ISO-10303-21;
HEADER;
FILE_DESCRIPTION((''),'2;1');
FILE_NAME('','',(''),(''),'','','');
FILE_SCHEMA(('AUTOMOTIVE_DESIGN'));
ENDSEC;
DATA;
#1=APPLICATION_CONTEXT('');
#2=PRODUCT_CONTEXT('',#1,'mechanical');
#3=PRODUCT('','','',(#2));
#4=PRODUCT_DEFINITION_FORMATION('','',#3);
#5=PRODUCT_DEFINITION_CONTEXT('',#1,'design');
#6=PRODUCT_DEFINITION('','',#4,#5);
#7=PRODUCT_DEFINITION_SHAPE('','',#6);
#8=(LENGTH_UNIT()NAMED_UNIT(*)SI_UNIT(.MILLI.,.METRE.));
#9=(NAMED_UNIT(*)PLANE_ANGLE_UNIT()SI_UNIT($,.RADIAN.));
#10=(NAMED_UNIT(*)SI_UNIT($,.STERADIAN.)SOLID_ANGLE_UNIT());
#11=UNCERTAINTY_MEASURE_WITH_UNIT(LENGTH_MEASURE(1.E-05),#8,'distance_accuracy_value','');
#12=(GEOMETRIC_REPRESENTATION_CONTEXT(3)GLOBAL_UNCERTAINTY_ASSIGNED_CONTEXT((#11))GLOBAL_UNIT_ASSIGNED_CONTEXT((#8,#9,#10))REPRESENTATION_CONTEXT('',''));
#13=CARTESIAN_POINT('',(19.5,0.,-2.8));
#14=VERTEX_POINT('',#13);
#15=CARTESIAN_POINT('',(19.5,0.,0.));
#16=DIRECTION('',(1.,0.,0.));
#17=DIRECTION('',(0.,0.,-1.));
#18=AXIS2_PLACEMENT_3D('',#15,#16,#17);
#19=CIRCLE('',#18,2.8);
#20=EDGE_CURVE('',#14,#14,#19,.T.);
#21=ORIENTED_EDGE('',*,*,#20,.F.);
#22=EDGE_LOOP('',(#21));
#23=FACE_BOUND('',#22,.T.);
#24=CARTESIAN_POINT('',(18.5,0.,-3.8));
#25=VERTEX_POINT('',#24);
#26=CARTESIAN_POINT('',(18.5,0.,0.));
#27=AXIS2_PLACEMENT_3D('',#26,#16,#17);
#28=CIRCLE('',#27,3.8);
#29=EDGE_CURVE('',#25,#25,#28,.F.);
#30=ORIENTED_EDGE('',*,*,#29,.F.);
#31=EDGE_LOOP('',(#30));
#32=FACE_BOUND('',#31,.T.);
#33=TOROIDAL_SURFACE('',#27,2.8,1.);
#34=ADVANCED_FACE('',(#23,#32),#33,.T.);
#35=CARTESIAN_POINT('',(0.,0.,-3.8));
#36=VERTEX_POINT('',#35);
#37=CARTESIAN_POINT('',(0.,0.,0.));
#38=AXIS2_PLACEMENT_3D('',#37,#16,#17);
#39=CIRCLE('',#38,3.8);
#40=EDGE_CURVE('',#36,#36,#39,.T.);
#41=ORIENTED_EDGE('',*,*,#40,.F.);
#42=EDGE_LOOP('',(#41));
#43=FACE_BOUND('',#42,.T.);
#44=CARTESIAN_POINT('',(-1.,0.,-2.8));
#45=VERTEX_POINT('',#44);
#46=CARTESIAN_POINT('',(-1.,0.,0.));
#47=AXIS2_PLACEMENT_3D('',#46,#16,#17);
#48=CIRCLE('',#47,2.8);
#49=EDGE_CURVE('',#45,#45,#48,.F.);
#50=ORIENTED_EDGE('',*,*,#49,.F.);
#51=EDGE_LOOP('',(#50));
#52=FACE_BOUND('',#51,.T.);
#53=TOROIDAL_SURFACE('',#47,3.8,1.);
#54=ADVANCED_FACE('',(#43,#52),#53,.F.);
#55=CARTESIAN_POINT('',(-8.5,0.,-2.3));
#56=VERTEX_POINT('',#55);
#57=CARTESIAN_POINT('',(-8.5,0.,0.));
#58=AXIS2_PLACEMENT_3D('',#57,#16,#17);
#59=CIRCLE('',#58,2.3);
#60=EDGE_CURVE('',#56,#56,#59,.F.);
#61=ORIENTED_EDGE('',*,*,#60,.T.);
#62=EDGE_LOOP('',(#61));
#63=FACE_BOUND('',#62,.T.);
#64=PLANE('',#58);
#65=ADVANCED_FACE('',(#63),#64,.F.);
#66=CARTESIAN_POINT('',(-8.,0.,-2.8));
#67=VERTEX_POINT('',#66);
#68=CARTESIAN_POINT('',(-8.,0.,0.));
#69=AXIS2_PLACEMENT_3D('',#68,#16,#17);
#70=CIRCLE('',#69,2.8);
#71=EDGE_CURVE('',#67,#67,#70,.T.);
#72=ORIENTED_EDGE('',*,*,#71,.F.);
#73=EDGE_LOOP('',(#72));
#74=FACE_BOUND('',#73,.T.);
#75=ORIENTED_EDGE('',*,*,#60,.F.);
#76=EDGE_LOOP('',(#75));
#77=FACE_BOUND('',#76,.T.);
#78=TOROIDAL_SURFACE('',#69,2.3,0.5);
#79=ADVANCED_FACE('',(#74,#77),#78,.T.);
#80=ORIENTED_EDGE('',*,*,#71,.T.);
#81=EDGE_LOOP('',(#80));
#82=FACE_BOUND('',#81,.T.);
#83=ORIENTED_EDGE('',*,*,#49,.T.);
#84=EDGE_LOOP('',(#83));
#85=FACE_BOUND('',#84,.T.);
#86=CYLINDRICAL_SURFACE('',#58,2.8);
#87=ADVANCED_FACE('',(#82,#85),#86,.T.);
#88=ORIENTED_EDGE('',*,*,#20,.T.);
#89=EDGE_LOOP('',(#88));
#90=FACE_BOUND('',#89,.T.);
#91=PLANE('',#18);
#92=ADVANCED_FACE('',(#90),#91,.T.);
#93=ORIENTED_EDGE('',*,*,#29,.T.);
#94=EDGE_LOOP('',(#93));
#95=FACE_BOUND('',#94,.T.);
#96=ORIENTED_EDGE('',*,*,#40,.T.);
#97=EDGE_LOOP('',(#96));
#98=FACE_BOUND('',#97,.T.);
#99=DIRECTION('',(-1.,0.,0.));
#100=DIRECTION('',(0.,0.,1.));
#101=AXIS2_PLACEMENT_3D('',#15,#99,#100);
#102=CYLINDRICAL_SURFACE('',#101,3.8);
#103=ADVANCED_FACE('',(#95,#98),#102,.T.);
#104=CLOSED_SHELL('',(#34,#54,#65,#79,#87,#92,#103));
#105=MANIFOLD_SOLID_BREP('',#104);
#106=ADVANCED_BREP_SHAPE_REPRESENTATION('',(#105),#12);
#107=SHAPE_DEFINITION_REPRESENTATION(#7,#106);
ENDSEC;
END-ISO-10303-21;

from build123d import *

# Parameters (mm, degrees)
CROQUIS1_R              = 3.8
CROQUIS1_R_2            = 2.8
SALIENTE_EXTRUIR1_DEPTH = 19.5
CROQUIS1_4_R            = 2.8
SALIENTE_EXTRUIR2_DEPTH = 8.5
REDONDEO1_R             = 1
REDONDEO2_R             = 0.5


with BuildPart() as part:
    # Croquis1 → Saliente-Extruir1 (new body)
    # profile 1 of 2: a face of its own
    with BuildSketch(Plane.YZ):
        with Locations(Location((0, 0, 0), (0, 0, 270))):
            Circle(CROQUIS1_R)
        Circle(CROQUIS1_R_2, mode=Mode.SUBTRACT)
    # profile 2 of 2: a face of its own
    with BuildSketch(Plane.YZ):
        Circle(CROQUIS1_R_2)
    extrude(amount=SALIENTE_EXTRUIR1_DEPTH)

    # Croquis1<4> → Saliente-Extruir2 (add)
    with BuildSketch(Plane.YZ):
        with Locations(Location((0, 0, 0), (0, 0, 270))):
            Circle(CROQUIS1_4_R)
    extrude(amount=-SALIENTE_EXTRUIR2_DEPTH)

    # Redondeo1
    redondeo1_edges = [part.edges().sort_by_distance(p)[0] for p in [
        (19.5, 0, 3.8),
        (0, 0, 2.8),
    ]]
    fillet(redondeo1_edges, radius=REDONDEO1_R - 0.0001)  # a hair under: the kernel refuses the full size

    # Redondeo2
    redondeo2_edges = [part.edges().sort_by_distance(p)[0] for p in [
        (-8.5, 0, 2.8),
    ]]
    fillet(redondeo2_edges, radius=REDONDEO2_R)


solid = part.part
